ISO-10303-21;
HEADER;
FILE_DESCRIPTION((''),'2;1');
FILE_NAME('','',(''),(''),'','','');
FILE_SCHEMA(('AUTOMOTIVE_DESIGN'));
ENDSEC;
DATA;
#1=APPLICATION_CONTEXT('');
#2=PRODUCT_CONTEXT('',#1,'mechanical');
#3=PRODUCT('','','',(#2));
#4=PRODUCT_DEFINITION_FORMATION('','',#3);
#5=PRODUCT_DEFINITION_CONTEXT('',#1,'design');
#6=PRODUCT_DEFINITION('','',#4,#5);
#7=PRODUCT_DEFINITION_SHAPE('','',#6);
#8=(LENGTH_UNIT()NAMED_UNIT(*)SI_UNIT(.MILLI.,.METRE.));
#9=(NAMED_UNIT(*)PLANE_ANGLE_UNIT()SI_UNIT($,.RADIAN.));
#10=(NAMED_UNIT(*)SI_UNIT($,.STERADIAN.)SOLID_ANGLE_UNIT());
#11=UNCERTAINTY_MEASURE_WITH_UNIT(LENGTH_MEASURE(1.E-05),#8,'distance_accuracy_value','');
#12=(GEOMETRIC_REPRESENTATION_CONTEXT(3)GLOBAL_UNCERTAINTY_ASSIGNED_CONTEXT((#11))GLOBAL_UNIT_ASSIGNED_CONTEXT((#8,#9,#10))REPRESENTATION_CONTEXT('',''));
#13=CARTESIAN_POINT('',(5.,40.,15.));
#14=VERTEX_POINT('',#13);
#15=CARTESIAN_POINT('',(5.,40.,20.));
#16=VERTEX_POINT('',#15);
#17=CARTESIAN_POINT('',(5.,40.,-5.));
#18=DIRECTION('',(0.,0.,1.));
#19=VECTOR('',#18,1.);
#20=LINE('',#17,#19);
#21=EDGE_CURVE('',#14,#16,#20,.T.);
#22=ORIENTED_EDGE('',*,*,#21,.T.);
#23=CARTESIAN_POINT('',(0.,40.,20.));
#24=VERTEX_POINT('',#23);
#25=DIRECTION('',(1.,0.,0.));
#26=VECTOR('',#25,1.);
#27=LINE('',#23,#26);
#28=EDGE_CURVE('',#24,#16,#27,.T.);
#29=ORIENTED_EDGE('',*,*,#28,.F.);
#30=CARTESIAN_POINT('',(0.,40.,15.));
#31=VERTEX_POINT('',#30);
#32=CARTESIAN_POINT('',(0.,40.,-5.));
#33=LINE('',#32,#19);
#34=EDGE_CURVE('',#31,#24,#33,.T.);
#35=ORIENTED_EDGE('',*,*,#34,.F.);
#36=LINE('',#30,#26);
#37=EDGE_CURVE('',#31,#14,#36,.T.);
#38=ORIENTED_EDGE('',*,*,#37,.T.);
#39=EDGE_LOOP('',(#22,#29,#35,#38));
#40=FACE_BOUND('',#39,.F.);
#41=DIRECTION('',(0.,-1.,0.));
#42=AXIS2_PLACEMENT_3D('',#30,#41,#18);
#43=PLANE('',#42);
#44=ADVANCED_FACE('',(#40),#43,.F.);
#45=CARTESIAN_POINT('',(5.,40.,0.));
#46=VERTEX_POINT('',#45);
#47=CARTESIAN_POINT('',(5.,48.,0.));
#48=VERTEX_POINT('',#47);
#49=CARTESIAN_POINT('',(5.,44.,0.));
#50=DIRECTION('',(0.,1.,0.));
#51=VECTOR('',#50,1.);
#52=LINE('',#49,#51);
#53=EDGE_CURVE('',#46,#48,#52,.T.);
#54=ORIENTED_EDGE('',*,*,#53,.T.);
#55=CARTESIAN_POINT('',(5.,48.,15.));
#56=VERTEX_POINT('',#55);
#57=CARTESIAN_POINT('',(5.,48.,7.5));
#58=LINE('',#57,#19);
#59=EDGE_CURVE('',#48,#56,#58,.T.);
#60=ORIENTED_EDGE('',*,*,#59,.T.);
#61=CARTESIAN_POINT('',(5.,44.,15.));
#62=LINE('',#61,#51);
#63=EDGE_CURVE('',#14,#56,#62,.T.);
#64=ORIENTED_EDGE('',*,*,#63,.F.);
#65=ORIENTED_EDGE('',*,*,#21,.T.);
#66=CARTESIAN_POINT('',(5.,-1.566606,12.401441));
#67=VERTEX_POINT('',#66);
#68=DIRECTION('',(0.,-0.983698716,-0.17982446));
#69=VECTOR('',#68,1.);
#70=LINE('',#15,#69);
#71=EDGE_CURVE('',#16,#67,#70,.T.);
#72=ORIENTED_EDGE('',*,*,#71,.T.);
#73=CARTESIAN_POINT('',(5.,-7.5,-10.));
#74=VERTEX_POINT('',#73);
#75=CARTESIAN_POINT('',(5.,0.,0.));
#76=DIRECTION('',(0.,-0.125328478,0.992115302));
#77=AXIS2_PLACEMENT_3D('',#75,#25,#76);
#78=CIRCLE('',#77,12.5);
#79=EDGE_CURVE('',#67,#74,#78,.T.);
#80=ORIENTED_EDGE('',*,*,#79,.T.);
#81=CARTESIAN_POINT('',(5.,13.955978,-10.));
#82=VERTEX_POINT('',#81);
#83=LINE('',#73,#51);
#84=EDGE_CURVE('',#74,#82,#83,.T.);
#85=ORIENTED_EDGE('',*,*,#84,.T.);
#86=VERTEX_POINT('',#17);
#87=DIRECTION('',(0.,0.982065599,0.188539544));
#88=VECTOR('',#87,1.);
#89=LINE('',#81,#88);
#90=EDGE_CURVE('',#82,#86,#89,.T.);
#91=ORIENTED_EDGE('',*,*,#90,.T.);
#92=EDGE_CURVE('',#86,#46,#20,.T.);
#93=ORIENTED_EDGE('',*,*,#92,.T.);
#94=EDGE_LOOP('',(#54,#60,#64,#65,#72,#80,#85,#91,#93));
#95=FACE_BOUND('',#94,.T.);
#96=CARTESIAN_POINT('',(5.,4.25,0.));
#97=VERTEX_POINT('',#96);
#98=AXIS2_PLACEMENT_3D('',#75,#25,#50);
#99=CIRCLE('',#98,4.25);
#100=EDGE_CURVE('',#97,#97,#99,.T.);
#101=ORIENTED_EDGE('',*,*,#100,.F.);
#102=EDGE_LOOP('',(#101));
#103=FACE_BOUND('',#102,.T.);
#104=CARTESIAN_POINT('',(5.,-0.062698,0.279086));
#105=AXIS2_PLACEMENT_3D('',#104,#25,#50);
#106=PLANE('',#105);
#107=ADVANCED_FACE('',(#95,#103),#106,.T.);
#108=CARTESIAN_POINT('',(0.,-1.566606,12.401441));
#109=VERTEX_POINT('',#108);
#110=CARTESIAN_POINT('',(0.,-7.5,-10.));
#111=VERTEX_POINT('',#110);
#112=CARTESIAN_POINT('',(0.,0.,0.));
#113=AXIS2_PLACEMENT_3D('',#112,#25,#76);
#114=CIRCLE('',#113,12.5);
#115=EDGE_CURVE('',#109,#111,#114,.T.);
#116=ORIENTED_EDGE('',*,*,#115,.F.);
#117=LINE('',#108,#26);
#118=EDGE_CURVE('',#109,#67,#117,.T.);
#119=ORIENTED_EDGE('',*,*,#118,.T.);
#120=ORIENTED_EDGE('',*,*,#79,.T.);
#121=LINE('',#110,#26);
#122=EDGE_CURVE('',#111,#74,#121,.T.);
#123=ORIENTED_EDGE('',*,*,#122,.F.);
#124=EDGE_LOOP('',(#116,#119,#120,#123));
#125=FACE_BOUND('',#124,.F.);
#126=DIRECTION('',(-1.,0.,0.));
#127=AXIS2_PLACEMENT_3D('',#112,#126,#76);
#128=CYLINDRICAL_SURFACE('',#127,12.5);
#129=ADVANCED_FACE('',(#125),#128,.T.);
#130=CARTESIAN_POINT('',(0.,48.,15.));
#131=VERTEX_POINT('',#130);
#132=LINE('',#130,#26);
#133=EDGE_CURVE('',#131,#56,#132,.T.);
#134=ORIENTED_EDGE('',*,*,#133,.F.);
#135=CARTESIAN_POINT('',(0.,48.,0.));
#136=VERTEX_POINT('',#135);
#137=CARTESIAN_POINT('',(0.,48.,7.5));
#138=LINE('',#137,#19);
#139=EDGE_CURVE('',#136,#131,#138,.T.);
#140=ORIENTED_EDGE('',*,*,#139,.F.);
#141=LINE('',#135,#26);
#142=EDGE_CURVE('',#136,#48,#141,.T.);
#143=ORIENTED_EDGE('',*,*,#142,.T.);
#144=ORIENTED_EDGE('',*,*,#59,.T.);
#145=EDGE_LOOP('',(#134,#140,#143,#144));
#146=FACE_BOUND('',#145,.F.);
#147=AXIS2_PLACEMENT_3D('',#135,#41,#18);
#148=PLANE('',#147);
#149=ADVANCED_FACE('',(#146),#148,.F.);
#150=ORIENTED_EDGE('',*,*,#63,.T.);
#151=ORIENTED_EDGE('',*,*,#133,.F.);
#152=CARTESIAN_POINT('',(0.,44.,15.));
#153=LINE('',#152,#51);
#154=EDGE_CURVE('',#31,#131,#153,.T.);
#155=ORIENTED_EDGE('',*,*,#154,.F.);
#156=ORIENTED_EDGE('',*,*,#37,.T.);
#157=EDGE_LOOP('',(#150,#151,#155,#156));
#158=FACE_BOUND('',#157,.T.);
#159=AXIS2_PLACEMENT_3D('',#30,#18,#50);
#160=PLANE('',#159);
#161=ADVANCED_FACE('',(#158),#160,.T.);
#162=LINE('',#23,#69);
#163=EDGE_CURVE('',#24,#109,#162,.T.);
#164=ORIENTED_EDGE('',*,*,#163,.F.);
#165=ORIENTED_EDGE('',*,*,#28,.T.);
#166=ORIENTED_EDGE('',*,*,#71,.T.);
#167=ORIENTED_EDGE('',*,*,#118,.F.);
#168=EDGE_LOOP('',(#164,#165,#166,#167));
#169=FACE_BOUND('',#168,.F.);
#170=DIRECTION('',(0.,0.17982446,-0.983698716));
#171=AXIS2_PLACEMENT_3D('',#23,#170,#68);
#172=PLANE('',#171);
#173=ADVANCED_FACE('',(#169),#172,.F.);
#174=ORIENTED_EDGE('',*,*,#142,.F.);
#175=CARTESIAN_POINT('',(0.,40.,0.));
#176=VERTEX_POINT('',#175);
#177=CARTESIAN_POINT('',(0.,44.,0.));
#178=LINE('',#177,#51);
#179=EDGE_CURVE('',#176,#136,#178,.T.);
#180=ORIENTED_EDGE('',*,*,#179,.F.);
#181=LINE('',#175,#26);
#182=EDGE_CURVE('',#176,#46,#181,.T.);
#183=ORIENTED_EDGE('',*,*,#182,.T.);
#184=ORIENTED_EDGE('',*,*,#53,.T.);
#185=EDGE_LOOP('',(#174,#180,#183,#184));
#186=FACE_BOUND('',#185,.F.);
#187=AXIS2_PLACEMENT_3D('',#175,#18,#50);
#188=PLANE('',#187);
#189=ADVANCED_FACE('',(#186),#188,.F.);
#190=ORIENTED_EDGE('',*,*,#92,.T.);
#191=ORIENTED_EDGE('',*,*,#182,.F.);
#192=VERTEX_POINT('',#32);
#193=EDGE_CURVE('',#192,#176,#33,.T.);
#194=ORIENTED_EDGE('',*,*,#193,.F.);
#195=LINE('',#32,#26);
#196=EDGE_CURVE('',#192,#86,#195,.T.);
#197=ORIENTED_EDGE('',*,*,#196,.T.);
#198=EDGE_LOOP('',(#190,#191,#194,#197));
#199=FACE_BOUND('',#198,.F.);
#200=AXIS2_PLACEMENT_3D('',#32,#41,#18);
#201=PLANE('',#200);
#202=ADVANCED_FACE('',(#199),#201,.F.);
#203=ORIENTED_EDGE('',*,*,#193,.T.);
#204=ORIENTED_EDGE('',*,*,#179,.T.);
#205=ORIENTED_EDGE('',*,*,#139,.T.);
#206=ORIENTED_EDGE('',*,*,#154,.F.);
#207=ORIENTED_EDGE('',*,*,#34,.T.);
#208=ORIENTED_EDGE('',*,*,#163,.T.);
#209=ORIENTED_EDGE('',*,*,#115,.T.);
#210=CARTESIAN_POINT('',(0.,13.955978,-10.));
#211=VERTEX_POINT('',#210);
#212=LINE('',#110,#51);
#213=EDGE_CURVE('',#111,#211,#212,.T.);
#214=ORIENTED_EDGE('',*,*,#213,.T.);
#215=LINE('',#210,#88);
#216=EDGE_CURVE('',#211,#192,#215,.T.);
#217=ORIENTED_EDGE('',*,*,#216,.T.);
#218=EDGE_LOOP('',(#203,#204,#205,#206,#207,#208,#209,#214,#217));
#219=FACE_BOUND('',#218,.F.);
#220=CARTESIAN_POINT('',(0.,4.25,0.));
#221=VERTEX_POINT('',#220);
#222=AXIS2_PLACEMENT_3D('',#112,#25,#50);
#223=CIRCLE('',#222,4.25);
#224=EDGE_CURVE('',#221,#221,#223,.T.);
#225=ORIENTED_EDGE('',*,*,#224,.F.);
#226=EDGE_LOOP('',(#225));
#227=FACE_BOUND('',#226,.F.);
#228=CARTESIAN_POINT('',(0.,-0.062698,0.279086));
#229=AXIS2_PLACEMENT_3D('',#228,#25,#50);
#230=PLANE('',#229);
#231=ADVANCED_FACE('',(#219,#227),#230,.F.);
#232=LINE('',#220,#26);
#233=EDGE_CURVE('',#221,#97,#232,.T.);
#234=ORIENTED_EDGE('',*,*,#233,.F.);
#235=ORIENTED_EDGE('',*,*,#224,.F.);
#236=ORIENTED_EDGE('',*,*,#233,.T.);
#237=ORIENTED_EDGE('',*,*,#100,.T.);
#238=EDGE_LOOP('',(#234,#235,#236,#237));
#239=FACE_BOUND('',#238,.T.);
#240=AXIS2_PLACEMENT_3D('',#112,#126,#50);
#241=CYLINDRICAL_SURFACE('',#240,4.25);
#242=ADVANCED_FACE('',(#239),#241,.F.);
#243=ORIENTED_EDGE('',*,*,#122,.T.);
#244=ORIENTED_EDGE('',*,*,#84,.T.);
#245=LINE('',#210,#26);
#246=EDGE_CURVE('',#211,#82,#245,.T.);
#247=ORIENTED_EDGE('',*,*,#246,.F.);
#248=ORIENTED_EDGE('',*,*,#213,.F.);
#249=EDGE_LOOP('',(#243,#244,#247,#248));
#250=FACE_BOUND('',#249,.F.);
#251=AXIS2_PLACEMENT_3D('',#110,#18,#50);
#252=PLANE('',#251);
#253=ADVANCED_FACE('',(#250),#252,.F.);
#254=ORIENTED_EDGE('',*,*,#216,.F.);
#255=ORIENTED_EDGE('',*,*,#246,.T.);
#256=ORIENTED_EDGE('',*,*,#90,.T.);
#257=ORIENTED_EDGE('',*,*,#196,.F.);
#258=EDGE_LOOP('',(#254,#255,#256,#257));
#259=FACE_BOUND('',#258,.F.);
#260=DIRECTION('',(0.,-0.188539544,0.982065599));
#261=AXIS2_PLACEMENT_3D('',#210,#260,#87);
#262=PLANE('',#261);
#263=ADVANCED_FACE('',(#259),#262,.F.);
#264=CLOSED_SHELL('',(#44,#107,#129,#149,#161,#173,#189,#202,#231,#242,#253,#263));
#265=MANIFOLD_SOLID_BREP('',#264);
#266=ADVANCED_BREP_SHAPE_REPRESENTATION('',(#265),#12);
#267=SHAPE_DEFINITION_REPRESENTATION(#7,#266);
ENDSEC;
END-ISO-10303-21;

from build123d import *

# Parameters (mm, degrees)
F0_R     = 4.25
F0_W     = 8
F0_H     = 15
F1_DEPTH = 5


# Not quite as in the source:
# - a feature names something its author has since deleted; it is built from what else it names


with BuildPart() as f1:
    # F0 (on Right) → F1 (new body)
    with BuildSketch(Plane.YZ):
        with BuildLine():
            Line((-7.5, -10), (7.5, -10))
            ThreePointArc((7.5, -10), (11.5869510213, 4.689623229), (-1.5666059757, 12.4014412758))
            ThreePointArc((-1.5666059757, 12.4014412758), (-12.0833347544, 3.2004720296), (-7.5, -10))
        make_face()
        Circle(F0_R, mode=Mode.SUBTRACT)
        with BuildLine():
            ThreePointArc((-1.5666059757, 12.4014412758), (11.5869510213, 4.689623229), (7.5, -10))
            Line((7.5, -10), (13.9559781345, -10))
            Line((13.9559781345, -10), (40, -5))
            Line((40, -5), (40, 0))
            Line((40, 0), (40, 15))
            Line((40, 15), (40, 20))
            Line((40, 20), (-1.5666059757, 12.4014412758))
        make_face()
        with Locations((44, 7.5)):
            Rectangle(F0_W, F0_H)
    extrude(amount=F1_DEPTH)


solid = f1.part
